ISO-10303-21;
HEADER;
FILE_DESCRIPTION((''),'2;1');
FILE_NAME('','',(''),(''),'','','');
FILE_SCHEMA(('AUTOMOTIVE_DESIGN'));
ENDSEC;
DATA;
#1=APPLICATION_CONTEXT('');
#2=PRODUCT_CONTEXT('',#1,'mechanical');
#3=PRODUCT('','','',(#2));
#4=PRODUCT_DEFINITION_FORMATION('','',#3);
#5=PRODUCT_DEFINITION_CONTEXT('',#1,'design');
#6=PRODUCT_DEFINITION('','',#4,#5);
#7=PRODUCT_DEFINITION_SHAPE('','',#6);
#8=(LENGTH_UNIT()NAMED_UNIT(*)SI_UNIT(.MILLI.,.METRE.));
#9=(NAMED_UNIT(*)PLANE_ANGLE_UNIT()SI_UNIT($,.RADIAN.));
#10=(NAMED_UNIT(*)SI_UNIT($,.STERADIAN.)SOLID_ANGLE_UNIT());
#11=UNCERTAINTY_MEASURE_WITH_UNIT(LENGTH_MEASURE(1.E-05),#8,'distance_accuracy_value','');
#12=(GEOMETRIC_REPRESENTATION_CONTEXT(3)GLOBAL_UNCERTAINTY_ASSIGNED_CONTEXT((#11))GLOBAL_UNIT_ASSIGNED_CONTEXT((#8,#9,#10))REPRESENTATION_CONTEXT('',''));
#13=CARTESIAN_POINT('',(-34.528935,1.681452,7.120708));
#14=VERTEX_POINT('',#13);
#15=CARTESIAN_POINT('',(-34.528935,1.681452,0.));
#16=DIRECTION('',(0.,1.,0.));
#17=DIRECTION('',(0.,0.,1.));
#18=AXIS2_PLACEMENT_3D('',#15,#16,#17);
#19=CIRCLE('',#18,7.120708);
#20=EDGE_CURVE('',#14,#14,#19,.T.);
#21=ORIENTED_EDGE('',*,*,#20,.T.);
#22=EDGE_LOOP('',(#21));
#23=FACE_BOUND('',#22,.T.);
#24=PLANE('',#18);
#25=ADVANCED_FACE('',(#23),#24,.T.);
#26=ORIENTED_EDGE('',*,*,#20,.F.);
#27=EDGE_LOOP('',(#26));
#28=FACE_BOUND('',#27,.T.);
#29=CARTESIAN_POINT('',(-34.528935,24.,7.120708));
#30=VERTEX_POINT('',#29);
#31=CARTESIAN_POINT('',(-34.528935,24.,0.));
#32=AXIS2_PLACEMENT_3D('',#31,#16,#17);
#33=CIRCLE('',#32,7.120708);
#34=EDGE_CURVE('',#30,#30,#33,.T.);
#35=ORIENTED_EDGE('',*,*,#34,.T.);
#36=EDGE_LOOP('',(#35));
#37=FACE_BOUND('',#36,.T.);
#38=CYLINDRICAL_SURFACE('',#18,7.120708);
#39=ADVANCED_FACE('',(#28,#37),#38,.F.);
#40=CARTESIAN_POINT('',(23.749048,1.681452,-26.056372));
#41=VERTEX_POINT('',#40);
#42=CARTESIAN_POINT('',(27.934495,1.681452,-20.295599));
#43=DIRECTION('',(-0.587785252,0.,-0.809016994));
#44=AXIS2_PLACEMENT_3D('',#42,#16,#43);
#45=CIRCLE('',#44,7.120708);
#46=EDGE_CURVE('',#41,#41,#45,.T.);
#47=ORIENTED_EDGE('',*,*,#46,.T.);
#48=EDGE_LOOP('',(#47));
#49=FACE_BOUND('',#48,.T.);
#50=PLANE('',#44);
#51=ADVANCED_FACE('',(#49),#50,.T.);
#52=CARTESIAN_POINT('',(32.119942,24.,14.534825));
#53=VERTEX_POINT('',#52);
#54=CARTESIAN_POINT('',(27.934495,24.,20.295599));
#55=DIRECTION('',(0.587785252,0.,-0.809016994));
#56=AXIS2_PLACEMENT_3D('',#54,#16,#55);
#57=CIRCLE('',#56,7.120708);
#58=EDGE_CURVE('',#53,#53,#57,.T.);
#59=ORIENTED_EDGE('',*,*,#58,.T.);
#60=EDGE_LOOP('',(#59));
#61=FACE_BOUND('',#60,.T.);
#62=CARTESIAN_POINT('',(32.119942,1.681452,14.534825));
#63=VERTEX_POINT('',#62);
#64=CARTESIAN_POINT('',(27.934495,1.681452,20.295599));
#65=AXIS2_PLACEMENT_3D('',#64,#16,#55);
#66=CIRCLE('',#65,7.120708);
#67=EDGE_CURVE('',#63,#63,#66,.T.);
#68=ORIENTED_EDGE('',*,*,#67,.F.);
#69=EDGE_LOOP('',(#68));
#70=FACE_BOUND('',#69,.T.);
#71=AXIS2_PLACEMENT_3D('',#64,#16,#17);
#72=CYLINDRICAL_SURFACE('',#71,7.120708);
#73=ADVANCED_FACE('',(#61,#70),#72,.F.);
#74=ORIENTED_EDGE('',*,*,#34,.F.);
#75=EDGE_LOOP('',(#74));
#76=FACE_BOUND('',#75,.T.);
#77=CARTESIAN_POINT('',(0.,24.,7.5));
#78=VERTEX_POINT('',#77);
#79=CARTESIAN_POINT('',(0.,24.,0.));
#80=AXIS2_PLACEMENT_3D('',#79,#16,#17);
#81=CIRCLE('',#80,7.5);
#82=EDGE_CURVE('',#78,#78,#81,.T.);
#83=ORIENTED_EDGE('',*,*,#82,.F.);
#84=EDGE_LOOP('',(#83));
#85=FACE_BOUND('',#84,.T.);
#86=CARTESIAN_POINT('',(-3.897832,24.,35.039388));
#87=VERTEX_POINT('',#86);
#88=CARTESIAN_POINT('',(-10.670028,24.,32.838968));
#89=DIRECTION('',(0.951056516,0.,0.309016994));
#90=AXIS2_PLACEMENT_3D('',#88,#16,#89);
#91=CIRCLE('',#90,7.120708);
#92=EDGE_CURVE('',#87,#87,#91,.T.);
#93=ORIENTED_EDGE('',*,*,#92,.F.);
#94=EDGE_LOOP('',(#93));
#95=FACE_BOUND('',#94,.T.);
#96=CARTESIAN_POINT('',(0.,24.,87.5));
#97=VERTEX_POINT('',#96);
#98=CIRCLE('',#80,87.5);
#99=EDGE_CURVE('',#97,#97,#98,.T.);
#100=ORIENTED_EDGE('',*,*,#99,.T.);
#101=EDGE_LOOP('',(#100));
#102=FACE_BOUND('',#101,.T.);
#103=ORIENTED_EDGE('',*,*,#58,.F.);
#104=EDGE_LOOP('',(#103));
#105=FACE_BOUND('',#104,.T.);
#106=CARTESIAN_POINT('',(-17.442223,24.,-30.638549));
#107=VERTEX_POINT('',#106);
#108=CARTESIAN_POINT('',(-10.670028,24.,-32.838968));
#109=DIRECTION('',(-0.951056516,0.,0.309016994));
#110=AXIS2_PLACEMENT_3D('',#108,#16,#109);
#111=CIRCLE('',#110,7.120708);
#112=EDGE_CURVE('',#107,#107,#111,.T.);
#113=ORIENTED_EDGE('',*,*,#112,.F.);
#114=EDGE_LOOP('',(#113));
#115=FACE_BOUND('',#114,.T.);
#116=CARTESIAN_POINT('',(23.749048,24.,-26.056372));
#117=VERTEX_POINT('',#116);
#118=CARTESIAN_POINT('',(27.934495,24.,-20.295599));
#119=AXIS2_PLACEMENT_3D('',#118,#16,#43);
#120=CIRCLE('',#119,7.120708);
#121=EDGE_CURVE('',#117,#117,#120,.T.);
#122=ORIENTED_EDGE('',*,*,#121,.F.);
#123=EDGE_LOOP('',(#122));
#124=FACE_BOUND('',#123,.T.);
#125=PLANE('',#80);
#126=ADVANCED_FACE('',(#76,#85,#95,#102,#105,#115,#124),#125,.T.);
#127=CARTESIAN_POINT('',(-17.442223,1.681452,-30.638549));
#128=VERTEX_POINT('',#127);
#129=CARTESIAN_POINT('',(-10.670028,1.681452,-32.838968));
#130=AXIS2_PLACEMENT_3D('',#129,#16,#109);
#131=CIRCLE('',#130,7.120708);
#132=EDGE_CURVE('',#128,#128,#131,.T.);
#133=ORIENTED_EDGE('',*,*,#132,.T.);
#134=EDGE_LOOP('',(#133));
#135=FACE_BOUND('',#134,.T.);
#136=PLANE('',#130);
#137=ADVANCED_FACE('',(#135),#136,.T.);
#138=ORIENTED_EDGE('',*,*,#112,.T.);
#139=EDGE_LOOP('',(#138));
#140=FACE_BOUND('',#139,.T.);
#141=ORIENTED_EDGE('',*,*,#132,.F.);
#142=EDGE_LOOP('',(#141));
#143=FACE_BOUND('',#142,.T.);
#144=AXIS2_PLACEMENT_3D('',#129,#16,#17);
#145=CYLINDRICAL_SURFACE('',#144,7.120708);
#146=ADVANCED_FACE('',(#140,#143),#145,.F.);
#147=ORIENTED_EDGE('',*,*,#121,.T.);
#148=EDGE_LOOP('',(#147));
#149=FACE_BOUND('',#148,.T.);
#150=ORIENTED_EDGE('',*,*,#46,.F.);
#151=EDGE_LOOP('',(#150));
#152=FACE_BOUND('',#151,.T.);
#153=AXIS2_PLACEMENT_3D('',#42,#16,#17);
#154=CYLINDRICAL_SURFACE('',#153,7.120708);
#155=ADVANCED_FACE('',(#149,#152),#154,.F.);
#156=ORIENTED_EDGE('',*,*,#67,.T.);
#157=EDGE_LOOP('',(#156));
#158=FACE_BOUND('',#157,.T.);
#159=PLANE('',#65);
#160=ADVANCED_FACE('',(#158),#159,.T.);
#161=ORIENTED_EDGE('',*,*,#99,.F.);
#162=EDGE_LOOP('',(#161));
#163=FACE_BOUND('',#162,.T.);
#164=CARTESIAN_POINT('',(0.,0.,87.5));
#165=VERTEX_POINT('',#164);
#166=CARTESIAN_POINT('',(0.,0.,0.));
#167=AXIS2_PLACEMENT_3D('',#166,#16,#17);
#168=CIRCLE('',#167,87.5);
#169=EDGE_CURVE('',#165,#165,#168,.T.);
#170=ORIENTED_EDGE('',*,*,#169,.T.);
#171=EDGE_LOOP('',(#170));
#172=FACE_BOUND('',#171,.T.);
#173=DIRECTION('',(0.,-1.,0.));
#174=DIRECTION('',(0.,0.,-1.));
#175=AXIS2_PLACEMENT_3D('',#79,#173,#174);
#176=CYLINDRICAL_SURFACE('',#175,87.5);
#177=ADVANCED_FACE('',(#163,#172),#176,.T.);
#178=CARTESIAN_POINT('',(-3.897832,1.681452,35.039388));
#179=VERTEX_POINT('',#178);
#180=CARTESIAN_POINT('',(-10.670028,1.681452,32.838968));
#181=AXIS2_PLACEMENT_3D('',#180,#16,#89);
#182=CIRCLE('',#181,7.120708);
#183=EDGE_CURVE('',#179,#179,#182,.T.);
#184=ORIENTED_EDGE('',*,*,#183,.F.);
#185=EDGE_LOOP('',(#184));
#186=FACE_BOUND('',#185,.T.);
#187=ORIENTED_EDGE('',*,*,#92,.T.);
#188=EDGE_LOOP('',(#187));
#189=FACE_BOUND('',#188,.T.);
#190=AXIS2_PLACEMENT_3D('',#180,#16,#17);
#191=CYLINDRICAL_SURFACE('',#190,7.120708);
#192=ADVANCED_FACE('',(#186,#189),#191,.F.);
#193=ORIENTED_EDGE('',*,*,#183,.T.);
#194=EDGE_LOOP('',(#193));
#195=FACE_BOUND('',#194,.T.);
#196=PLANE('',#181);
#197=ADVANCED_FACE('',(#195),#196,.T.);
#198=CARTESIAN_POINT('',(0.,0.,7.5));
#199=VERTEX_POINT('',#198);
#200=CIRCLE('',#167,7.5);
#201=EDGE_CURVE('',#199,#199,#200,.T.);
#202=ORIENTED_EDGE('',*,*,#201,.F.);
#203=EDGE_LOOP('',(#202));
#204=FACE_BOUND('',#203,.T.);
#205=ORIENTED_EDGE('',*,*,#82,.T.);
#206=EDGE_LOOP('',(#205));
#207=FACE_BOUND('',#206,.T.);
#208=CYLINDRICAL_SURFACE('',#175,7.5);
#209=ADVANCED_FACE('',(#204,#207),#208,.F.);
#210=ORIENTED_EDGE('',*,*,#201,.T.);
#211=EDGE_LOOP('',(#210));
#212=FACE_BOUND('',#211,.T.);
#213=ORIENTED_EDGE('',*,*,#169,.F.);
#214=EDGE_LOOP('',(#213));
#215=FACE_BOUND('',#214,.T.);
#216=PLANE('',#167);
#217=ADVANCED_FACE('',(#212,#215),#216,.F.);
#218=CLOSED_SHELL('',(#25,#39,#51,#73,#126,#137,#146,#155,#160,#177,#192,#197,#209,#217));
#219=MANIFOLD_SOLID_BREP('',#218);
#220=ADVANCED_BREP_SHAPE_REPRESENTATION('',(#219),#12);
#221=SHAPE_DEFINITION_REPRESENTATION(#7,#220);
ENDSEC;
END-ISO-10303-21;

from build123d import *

# Parameters (mm, degrees)
SKETCH1_R           = 87.5
BOSS_EXTRUDE1_DEPTH = 24
SKETCH2_R           = 7.5
CUT_EXTRUDE1_DEPTH  = 127.049593415
SKETCH3_R           = 7.120707896
CUT_EXTRUDE2_DEPTH  = 22.318548442
CIRPATTERN1_COUNT   = 5


with BuildPart() as part:
    # Sketch1 → Boss-Extrude1 (new body)
    with BuildSketch(Plane(origin=(0, 0, 0), x_dir=(1, 0, 0), z_dir=(0, 1, 0))):
        Circle(SKETCH1_R)
    extrude(amount=BOSS_EXTRUDE1_DEPTH)

    # Sketch2 → Cut-Extrude1 (cut, through all)
    with BuildSketch(Plane(origin=(0, 0, 0), x_dir=(1, 0, 0), z_dir=(0, 1, 0))):
        Circle(SKETCH2_R)
    extrude(amount=CUT_EXTRUDE1_DEPTH, mode=Mode.SUBTRACT)

    # Sketch3 → Cut-Extrude2 (cut)
    with BuildSketch(Plane(origin=(0, 24, 0), x_dir=(1, 0, 0), z_dir=(0, 1, 0))):
        with Locations((-34.52893475, 0)):
            Circle(SKETCH3_R)
    cut_extrude2 = extrude(amount=-CUT_EXTRUDE2_DEPTH, mode=Mode.SUBTRACT)

    # CirPattern1: Cut-Extrude2 ×5 about axis
    cirpattern1_axis = Axis((0, 0, 0), (0, 1, 0))
    for i in range(1, CIRPATTERN1_COUNT):
        add(cut_extrude2.rotate(cirpattern1_axis, i * 360 / CIRPATTERN1_COUNT), mode=Mode.SUBTRACT)


solid = part.part
